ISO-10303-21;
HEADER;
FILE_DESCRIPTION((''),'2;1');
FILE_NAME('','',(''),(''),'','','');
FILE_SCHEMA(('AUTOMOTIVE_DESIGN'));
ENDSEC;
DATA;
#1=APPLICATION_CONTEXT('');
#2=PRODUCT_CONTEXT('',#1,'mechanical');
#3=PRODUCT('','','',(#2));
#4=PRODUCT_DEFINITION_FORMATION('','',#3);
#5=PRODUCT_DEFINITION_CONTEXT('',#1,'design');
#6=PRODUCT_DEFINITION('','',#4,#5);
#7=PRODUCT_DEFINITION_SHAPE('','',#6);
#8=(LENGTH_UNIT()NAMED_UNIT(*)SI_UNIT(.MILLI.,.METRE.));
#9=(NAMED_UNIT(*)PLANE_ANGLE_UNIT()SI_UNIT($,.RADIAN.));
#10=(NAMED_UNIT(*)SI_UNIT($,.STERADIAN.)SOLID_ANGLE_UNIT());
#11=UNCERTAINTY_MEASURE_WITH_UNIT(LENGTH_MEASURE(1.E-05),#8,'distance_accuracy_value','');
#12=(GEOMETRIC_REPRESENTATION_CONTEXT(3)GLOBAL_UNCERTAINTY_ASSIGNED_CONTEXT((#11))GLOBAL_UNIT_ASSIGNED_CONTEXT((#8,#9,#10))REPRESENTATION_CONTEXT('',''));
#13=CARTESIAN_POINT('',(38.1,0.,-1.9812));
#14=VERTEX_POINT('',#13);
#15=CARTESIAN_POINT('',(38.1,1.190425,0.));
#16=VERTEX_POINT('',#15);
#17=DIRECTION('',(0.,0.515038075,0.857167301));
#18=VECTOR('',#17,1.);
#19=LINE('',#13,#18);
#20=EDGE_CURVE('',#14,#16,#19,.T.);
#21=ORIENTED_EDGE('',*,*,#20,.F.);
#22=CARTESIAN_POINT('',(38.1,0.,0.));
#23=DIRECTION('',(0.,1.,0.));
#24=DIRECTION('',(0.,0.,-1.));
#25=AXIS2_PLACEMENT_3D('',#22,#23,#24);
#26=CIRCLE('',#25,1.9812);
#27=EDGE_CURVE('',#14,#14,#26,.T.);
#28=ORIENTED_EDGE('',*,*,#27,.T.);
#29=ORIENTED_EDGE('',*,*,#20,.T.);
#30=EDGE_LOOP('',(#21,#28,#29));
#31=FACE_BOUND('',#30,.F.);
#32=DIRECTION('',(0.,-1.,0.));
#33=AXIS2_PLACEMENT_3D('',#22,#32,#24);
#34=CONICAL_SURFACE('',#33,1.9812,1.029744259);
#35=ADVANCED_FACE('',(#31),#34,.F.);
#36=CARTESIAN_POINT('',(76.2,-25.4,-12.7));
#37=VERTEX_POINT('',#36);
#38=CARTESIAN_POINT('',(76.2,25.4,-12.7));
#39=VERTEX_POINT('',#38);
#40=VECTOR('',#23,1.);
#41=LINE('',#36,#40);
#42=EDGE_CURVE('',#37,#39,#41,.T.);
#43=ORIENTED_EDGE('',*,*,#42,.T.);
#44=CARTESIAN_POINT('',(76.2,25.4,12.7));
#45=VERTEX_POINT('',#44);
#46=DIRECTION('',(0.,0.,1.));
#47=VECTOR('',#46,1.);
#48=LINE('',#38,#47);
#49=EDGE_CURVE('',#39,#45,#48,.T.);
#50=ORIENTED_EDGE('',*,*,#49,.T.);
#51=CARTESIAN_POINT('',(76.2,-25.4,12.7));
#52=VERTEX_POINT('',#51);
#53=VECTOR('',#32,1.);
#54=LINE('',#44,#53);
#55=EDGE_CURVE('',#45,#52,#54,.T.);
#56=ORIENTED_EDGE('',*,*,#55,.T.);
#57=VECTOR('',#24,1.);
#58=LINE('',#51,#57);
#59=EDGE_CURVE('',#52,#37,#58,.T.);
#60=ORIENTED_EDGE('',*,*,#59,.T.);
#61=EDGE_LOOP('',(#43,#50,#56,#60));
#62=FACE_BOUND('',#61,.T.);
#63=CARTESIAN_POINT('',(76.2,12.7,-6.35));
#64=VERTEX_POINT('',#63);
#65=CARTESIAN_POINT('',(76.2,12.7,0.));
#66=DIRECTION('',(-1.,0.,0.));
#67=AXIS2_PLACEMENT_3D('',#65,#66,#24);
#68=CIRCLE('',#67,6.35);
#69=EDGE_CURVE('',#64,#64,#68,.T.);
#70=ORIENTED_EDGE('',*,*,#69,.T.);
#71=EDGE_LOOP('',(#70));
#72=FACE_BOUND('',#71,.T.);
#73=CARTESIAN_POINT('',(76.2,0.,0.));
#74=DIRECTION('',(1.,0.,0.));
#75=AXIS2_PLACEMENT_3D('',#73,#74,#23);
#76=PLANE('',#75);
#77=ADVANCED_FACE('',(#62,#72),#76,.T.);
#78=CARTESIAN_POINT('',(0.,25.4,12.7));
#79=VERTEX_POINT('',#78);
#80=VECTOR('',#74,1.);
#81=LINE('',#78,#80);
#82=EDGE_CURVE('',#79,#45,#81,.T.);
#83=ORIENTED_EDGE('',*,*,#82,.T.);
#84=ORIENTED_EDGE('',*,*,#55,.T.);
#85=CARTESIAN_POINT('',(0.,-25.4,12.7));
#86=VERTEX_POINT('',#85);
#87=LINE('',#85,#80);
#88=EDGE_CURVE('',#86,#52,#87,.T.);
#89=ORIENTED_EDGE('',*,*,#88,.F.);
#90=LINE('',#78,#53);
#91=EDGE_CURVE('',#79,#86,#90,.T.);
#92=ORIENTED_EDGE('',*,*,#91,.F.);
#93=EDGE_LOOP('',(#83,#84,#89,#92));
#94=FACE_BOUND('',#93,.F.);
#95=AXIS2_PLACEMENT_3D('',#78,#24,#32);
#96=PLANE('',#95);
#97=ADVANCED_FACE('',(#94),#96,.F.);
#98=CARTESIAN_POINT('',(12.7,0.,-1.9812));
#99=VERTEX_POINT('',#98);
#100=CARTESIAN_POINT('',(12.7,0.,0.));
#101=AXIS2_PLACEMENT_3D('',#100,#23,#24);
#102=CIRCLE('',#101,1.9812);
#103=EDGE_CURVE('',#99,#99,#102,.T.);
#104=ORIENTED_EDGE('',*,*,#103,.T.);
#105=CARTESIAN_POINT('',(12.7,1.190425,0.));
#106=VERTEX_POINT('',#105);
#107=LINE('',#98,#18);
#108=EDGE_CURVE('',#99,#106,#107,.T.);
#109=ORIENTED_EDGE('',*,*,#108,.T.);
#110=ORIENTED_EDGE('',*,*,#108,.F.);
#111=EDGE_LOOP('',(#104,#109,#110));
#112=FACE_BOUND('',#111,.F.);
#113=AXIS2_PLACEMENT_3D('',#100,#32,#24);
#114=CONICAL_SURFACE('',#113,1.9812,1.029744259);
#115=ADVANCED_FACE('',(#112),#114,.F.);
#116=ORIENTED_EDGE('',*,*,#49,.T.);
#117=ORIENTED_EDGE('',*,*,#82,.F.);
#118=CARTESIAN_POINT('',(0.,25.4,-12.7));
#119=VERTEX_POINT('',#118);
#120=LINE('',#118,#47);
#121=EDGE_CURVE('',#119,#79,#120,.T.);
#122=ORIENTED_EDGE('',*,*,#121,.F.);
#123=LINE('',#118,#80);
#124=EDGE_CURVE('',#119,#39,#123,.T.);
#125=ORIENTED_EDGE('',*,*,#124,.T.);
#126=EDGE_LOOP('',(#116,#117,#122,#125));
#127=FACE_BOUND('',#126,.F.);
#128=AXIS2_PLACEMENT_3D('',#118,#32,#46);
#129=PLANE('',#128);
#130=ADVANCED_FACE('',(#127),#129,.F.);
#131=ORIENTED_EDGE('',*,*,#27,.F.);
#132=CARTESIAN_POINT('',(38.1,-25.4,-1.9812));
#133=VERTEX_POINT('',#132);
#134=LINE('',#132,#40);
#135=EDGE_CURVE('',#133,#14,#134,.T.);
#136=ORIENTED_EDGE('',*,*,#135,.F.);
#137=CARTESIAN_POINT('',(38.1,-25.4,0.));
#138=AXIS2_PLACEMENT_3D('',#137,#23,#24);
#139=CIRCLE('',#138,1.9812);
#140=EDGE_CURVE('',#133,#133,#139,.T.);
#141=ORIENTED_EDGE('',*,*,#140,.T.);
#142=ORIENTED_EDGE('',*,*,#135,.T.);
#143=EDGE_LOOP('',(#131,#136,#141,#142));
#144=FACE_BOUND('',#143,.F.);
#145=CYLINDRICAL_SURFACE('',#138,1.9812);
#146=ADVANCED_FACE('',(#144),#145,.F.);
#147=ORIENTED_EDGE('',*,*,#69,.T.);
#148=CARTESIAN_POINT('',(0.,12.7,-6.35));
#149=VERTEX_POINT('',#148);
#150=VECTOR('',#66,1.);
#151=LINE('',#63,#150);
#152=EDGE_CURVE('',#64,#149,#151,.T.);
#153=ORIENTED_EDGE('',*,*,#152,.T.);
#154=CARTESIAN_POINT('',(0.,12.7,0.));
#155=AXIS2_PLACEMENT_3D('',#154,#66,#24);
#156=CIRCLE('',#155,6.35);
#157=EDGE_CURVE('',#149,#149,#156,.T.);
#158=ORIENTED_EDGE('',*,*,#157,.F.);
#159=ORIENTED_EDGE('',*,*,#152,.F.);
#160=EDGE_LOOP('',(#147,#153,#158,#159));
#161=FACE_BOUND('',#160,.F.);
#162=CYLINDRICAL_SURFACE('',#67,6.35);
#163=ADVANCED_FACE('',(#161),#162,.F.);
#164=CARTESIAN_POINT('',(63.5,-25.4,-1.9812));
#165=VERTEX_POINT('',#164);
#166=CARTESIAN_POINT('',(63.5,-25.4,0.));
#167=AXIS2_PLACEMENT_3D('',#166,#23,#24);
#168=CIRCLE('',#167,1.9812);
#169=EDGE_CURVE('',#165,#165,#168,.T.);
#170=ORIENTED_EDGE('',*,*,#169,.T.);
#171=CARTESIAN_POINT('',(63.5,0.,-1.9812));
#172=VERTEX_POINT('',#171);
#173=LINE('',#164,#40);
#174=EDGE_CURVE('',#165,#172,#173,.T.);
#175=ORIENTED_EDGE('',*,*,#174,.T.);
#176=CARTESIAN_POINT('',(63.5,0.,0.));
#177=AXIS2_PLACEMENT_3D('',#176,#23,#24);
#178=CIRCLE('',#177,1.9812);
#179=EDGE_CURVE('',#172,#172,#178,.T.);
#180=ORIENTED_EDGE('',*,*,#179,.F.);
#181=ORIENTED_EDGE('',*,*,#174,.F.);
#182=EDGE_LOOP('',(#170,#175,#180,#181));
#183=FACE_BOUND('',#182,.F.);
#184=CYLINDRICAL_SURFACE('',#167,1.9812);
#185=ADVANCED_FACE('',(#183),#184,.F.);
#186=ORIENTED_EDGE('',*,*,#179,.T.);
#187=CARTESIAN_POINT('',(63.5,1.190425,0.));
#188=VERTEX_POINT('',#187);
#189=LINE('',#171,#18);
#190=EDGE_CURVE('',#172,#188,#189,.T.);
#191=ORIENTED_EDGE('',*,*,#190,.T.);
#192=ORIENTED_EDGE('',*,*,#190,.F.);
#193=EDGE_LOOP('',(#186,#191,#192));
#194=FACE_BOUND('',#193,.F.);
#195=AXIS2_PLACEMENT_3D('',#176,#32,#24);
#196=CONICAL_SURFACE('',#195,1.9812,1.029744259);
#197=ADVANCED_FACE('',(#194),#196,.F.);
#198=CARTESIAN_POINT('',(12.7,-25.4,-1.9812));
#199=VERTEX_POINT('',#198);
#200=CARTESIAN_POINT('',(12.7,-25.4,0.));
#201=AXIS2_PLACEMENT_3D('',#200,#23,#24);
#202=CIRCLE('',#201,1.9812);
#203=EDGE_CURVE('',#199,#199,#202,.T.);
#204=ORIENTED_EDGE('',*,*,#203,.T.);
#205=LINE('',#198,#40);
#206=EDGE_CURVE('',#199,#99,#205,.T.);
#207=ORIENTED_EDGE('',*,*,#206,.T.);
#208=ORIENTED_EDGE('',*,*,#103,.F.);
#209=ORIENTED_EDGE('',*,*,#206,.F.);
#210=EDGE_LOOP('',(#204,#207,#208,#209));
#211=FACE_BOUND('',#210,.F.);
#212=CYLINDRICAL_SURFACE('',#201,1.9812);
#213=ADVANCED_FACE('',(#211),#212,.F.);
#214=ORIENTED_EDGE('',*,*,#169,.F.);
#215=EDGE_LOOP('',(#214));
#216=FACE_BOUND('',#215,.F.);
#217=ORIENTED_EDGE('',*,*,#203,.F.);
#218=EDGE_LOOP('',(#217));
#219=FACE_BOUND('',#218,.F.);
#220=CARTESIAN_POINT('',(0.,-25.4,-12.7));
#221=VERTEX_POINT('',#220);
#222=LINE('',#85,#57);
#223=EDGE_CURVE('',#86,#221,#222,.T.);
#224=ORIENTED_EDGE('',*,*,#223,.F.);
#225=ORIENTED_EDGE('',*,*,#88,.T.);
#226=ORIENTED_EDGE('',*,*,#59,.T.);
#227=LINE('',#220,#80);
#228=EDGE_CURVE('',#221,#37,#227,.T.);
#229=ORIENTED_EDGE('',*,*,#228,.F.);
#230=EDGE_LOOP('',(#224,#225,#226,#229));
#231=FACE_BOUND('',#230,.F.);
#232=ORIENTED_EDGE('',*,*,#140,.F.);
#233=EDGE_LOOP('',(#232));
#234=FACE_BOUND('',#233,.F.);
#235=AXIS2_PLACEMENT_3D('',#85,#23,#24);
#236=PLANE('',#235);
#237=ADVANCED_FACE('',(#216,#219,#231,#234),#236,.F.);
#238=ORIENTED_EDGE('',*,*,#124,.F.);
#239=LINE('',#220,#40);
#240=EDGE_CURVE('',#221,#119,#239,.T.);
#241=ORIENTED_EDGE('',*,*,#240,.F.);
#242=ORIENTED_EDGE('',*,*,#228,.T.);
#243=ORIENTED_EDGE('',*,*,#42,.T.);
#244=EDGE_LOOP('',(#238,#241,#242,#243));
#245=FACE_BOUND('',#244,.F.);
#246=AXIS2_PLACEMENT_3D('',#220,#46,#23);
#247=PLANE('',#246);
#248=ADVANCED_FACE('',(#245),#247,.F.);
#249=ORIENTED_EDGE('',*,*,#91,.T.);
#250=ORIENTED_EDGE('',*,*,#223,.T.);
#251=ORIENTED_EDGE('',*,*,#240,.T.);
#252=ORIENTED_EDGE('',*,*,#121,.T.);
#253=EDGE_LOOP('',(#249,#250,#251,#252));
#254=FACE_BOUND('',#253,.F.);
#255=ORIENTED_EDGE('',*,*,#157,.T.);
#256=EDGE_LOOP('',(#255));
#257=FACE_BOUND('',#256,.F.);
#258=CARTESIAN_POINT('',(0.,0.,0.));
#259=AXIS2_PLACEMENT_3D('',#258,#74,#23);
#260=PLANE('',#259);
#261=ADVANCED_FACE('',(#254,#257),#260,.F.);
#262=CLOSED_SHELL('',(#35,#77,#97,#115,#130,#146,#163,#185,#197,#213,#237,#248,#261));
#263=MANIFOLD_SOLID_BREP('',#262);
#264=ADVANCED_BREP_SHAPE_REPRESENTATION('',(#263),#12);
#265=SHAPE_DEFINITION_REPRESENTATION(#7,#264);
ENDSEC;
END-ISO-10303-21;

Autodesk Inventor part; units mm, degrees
ref_plane "YZ Plane" through (0, 0, 0) normal (1, 0, 0) x (0, 1, 0)
ref_plane "XZ Plane" through (0, 0, 0) normal (0, 1, 0) x (-1, 0, 0)
ref_plane "XY Plane" through (0, 0, 0) normal (0, 0, 1) x (1, 0, 0)
sketch "Sketch1" plane through (0, 0, 0) normal (1, 0, 0) x (0, 1, 0)
  line L0 (25.4, 12.7) -> (-25.4, 12.7)
  line L1 (-25.4, 12.7) -> (-25.4, -12.7)
  line L2 (-25.4, -12.7) -> (25.4, -12.7)
  line L3 (25.4, -12.7) -> (25.4, 12.7)
  line L4 (25.4, 12.7) -> (-25.4, -12.7) construction
  line L5 (-25.4, 12.7) -> (25.4, -12.7) construction
  point P0 (0, 0)
  dimension "d0" = 50.8
  dimension "d1" = 25.4
extrude "Extrusion1" add sketch "Sketch1" along normal blind 76.2
sketch "Sketch2" plane through (76.2, 0, 0) normal (1, 0, 0) x (0, 0, -1)
  line L0 (12.7, 25.4) -> (-12.7, 25.4) construction
  point P0 (0, 0)
  point P1 (0, 12.7)
  dimension "d4" = 12.7
hole "Hole1" at (76.2, 12.7, 0) direction (-1, 0, 0) diameter 12.7 end through all
sketch "Sketch3" plane through (0, -25.4, -12.7) normal (0, -1, 0) x (1, 0, 0)
  line L0 (0, 0) -> (76.2, 0) construction
  line L1 (63.5, 12.7) -> (12.7, 12.7) construction
  line L2 (76.2, 25.4) -> (76.2, 0) construction
  point P0 (0, 12.7)
  point P1 (38.1, 12.7)
  point P2 (38.1, 0)
  point P3 (38.1, 12.7)
  point P4 (76.2, 12.7)
  dimension "d12" = 50.8
hole "Hole2" at (63.5, -25.4, 0) at (38.1, -25.4, 0) at (12.7, -25.4, 0) direction (0, 1, 0) diameter 3.9624 depth 25.4 tip angle 118 thread size "10-32 UNF" class "2B" standard "ANSI Unified Screw Threads"
properties part number "CL3-008" material "Aluminum 6061"
